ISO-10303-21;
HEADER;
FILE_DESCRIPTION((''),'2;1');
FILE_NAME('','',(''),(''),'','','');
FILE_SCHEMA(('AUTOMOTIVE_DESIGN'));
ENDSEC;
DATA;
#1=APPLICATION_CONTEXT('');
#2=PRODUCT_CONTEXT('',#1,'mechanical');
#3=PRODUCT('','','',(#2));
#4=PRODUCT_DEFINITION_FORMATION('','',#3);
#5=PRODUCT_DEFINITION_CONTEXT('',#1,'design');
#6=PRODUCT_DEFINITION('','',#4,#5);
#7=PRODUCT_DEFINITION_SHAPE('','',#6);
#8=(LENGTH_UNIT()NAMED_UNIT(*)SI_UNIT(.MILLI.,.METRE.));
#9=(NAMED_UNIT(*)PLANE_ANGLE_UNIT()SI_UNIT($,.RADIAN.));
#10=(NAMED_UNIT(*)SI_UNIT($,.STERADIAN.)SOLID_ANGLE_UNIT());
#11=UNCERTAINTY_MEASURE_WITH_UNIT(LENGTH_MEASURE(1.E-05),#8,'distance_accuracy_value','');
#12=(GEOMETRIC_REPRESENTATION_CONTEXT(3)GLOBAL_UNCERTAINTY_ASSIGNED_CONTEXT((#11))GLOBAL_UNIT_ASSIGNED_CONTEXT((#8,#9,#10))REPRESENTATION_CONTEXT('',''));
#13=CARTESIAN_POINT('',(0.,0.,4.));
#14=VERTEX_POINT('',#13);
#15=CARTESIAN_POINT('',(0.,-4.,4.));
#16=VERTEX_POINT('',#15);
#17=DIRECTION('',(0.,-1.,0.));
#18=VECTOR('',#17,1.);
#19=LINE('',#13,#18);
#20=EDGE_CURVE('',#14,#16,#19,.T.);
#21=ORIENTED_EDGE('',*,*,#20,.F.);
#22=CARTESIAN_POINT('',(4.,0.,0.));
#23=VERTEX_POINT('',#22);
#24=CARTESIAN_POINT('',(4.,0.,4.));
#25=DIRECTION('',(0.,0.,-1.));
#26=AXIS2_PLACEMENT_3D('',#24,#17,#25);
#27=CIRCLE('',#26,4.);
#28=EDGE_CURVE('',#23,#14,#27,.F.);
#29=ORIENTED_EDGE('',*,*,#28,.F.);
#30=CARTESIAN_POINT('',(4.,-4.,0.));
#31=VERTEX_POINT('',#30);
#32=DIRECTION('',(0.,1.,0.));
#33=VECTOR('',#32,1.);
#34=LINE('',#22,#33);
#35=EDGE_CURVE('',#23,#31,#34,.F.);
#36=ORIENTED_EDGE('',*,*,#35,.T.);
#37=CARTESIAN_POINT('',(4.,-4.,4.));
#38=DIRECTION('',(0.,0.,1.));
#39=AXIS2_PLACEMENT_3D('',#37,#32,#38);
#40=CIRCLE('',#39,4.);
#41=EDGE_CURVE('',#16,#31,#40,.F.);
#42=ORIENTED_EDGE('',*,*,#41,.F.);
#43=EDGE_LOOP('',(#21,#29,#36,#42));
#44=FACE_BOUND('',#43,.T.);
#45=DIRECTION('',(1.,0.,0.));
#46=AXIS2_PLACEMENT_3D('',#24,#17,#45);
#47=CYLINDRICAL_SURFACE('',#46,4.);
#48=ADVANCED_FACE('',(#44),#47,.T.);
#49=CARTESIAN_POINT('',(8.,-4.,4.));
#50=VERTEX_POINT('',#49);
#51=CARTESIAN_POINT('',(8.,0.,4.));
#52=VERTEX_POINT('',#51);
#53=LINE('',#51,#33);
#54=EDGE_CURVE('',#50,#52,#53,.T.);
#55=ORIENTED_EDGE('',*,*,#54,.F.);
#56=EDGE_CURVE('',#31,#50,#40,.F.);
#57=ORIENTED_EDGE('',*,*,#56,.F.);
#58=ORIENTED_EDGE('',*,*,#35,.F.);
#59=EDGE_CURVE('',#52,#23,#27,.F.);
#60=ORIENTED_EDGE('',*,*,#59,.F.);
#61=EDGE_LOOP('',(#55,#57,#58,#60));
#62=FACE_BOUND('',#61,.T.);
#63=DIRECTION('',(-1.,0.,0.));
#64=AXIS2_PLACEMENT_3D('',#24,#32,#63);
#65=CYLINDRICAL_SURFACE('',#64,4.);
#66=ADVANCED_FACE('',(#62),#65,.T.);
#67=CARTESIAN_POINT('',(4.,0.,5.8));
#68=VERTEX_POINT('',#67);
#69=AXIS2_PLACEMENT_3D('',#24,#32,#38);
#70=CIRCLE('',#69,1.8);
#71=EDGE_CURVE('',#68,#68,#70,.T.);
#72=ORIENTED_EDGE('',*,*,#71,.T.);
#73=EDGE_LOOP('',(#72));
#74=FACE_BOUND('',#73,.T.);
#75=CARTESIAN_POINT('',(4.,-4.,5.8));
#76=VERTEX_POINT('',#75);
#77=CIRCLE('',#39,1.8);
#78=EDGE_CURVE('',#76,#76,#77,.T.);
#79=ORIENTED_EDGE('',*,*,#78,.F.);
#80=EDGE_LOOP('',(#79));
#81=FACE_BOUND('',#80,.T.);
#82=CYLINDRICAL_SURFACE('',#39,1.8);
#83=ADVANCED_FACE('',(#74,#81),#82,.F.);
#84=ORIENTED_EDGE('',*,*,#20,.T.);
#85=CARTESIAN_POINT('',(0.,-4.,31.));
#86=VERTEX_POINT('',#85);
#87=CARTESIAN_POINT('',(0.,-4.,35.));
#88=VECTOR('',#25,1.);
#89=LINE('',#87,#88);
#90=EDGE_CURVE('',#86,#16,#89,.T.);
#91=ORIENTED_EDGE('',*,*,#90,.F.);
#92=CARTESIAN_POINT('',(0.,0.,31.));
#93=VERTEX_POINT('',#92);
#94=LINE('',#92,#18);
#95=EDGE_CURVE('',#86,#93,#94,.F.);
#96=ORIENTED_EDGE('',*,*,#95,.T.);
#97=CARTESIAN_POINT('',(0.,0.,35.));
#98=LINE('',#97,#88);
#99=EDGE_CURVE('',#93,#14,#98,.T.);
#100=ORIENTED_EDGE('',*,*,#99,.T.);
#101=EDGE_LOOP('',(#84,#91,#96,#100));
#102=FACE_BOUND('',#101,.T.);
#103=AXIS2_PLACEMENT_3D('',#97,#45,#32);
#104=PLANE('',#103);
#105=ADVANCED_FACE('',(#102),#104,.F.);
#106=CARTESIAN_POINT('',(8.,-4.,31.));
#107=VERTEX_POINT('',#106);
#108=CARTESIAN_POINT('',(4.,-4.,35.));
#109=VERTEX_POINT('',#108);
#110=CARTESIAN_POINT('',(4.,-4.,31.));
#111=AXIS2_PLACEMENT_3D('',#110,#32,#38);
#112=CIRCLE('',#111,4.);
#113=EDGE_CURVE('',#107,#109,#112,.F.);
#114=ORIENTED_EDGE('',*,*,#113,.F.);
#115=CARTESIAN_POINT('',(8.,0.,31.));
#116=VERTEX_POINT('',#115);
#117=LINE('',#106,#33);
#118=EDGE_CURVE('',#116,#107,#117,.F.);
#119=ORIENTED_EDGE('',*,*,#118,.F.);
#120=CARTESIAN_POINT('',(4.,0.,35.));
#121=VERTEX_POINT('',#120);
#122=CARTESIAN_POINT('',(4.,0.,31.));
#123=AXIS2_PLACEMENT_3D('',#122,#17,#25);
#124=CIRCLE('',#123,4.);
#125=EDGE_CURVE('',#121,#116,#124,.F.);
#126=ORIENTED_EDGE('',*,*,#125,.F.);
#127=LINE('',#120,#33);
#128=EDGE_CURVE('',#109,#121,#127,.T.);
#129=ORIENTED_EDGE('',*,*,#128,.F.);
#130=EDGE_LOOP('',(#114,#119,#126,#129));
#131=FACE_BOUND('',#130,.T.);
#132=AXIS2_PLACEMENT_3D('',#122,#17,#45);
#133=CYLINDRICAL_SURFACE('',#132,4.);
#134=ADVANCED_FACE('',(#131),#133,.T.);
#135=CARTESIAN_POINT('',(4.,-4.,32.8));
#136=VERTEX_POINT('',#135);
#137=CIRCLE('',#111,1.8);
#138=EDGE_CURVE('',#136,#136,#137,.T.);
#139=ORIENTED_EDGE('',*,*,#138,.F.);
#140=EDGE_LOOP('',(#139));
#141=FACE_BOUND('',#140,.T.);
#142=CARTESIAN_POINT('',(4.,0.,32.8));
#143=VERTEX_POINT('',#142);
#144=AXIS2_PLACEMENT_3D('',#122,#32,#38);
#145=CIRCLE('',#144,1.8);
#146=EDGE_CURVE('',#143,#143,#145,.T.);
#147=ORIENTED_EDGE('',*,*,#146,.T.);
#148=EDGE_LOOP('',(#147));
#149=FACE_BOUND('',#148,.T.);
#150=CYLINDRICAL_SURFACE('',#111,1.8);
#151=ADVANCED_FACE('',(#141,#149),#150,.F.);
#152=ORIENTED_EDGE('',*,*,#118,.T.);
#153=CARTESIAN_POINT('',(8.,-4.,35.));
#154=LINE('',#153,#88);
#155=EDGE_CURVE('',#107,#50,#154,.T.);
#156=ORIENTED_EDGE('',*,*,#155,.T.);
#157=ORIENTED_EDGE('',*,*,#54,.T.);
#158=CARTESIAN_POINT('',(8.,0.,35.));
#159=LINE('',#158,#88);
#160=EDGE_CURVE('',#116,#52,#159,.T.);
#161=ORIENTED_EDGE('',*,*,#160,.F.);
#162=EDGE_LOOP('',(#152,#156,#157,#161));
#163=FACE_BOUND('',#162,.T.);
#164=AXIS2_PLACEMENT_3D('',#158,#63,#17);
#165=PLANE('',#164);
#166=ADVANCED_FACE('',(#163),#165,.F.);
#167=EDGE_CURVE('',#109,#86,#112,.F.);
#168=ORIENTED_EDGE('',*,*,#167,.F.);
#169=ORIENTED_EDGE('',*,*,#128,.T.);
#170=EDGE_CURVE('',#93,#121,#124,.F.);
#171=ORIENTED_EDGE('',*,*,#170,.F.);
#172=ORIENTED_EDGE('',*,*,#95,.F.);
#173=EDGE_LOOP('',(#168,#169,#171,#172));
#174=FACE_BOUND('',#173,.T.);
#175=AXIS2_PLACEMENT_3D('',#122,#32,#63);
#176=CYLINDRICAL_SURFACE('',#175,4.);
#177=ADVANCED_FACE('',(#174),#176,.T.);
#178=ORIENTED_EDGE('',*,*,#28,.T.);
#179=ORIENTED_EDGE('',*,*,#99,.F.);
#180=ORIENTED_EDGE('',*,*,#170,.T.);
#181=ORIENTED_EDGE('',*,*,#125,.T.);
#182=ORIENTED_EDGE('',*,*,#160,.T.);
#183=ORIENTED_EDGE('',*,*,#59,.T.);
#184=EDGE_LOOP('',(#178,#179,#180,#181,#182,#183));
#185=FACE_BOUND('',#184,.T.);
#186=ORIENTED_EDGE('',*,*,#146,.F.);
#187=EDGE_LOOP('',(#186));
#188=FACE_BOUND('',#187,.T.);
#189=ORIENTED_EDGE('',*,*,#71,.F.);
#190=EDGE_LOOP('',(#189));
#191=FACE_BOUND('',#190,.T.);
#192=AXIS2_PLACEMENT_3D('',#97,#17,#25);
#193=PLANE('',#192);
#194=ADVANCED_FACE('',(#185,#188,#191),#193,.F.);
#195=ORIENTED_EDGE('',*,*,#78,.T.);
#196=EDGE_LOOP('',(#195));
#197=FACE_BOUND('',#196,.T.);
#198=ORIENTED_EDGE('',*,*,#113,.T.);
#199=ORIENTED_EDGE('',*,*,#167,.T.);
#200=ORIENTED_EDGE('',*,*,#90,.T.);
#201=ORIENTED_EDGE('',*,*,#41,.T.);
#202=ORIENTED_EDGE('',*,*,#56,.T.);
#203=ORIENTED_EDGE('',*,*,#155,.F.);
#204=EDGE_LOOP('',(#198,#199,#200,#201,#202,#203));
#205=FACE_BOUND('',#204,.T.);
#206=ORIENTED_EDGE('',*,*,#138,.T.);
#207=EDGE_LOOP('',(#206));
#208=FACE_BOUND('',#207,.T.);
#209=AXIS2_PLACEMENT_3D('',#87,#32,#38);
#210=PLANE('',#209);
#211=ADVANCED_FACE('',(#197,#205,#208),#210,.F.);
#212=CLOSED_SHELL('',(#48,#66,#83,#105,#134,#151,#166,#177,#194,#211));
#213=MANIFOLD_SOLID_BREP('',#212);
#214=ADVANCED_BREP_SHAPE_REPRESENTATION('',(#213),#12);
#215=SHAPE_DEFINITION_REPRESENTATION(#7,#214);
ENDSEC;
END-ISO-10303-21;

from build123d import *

# Parameters (mm, degrees)
SKETCH1_W           = 8
SKETCH1_H           = 4
BOSS_EXTRUDE1_DEPTH = 35
SKETCH2_R           = 1.8
CUT_EXTRUDE1_DEPTH  = 37.124783736
FILLET1_R           = 4


with BuildPart() as part:
    # Sketch1 → Boss-Extrude1 (new body)
    with BuildSketch(Plane.XY):
        with Locations((4, -2)):
            Rectangle(SKETCH1_W, SKETCH1_H)
    extrude(amount=BOSS_EXTRUDE1_DEPTH)

    # Sketch2 → Cut-Extrude1 (cut, through all)
    with BuildSketch(Plane(origin=(0, 0, 0), x_dir=(1, 0, 0), z_dir=(0, 1, 0))):
        with Locations(Location((4, -4, 0), (0, 0, 270))):
            Circle(SKETCH2_R)
        with Locations(Location((4, -31, 0), (0, 0, 270))):
            Circle(SKETCH2_R)
    extrude(amount=-CUT_EXTRUDE1_DEPTH, mode=Mode.SUBTRACT)

    # Fillet1
    fillet1_edges = [part.edges().sort_by_distance(p)[0] for p in [
        (0, -2, 0),
        (8, -2, 0),
        (0, -2, 35),
        (8, -2, 35),
    ]]
    fillet(fillet1_edges, radius=FILLET1_R - 0.0001)  # a hair under: the kernel refuses the full size


solid = part.part
